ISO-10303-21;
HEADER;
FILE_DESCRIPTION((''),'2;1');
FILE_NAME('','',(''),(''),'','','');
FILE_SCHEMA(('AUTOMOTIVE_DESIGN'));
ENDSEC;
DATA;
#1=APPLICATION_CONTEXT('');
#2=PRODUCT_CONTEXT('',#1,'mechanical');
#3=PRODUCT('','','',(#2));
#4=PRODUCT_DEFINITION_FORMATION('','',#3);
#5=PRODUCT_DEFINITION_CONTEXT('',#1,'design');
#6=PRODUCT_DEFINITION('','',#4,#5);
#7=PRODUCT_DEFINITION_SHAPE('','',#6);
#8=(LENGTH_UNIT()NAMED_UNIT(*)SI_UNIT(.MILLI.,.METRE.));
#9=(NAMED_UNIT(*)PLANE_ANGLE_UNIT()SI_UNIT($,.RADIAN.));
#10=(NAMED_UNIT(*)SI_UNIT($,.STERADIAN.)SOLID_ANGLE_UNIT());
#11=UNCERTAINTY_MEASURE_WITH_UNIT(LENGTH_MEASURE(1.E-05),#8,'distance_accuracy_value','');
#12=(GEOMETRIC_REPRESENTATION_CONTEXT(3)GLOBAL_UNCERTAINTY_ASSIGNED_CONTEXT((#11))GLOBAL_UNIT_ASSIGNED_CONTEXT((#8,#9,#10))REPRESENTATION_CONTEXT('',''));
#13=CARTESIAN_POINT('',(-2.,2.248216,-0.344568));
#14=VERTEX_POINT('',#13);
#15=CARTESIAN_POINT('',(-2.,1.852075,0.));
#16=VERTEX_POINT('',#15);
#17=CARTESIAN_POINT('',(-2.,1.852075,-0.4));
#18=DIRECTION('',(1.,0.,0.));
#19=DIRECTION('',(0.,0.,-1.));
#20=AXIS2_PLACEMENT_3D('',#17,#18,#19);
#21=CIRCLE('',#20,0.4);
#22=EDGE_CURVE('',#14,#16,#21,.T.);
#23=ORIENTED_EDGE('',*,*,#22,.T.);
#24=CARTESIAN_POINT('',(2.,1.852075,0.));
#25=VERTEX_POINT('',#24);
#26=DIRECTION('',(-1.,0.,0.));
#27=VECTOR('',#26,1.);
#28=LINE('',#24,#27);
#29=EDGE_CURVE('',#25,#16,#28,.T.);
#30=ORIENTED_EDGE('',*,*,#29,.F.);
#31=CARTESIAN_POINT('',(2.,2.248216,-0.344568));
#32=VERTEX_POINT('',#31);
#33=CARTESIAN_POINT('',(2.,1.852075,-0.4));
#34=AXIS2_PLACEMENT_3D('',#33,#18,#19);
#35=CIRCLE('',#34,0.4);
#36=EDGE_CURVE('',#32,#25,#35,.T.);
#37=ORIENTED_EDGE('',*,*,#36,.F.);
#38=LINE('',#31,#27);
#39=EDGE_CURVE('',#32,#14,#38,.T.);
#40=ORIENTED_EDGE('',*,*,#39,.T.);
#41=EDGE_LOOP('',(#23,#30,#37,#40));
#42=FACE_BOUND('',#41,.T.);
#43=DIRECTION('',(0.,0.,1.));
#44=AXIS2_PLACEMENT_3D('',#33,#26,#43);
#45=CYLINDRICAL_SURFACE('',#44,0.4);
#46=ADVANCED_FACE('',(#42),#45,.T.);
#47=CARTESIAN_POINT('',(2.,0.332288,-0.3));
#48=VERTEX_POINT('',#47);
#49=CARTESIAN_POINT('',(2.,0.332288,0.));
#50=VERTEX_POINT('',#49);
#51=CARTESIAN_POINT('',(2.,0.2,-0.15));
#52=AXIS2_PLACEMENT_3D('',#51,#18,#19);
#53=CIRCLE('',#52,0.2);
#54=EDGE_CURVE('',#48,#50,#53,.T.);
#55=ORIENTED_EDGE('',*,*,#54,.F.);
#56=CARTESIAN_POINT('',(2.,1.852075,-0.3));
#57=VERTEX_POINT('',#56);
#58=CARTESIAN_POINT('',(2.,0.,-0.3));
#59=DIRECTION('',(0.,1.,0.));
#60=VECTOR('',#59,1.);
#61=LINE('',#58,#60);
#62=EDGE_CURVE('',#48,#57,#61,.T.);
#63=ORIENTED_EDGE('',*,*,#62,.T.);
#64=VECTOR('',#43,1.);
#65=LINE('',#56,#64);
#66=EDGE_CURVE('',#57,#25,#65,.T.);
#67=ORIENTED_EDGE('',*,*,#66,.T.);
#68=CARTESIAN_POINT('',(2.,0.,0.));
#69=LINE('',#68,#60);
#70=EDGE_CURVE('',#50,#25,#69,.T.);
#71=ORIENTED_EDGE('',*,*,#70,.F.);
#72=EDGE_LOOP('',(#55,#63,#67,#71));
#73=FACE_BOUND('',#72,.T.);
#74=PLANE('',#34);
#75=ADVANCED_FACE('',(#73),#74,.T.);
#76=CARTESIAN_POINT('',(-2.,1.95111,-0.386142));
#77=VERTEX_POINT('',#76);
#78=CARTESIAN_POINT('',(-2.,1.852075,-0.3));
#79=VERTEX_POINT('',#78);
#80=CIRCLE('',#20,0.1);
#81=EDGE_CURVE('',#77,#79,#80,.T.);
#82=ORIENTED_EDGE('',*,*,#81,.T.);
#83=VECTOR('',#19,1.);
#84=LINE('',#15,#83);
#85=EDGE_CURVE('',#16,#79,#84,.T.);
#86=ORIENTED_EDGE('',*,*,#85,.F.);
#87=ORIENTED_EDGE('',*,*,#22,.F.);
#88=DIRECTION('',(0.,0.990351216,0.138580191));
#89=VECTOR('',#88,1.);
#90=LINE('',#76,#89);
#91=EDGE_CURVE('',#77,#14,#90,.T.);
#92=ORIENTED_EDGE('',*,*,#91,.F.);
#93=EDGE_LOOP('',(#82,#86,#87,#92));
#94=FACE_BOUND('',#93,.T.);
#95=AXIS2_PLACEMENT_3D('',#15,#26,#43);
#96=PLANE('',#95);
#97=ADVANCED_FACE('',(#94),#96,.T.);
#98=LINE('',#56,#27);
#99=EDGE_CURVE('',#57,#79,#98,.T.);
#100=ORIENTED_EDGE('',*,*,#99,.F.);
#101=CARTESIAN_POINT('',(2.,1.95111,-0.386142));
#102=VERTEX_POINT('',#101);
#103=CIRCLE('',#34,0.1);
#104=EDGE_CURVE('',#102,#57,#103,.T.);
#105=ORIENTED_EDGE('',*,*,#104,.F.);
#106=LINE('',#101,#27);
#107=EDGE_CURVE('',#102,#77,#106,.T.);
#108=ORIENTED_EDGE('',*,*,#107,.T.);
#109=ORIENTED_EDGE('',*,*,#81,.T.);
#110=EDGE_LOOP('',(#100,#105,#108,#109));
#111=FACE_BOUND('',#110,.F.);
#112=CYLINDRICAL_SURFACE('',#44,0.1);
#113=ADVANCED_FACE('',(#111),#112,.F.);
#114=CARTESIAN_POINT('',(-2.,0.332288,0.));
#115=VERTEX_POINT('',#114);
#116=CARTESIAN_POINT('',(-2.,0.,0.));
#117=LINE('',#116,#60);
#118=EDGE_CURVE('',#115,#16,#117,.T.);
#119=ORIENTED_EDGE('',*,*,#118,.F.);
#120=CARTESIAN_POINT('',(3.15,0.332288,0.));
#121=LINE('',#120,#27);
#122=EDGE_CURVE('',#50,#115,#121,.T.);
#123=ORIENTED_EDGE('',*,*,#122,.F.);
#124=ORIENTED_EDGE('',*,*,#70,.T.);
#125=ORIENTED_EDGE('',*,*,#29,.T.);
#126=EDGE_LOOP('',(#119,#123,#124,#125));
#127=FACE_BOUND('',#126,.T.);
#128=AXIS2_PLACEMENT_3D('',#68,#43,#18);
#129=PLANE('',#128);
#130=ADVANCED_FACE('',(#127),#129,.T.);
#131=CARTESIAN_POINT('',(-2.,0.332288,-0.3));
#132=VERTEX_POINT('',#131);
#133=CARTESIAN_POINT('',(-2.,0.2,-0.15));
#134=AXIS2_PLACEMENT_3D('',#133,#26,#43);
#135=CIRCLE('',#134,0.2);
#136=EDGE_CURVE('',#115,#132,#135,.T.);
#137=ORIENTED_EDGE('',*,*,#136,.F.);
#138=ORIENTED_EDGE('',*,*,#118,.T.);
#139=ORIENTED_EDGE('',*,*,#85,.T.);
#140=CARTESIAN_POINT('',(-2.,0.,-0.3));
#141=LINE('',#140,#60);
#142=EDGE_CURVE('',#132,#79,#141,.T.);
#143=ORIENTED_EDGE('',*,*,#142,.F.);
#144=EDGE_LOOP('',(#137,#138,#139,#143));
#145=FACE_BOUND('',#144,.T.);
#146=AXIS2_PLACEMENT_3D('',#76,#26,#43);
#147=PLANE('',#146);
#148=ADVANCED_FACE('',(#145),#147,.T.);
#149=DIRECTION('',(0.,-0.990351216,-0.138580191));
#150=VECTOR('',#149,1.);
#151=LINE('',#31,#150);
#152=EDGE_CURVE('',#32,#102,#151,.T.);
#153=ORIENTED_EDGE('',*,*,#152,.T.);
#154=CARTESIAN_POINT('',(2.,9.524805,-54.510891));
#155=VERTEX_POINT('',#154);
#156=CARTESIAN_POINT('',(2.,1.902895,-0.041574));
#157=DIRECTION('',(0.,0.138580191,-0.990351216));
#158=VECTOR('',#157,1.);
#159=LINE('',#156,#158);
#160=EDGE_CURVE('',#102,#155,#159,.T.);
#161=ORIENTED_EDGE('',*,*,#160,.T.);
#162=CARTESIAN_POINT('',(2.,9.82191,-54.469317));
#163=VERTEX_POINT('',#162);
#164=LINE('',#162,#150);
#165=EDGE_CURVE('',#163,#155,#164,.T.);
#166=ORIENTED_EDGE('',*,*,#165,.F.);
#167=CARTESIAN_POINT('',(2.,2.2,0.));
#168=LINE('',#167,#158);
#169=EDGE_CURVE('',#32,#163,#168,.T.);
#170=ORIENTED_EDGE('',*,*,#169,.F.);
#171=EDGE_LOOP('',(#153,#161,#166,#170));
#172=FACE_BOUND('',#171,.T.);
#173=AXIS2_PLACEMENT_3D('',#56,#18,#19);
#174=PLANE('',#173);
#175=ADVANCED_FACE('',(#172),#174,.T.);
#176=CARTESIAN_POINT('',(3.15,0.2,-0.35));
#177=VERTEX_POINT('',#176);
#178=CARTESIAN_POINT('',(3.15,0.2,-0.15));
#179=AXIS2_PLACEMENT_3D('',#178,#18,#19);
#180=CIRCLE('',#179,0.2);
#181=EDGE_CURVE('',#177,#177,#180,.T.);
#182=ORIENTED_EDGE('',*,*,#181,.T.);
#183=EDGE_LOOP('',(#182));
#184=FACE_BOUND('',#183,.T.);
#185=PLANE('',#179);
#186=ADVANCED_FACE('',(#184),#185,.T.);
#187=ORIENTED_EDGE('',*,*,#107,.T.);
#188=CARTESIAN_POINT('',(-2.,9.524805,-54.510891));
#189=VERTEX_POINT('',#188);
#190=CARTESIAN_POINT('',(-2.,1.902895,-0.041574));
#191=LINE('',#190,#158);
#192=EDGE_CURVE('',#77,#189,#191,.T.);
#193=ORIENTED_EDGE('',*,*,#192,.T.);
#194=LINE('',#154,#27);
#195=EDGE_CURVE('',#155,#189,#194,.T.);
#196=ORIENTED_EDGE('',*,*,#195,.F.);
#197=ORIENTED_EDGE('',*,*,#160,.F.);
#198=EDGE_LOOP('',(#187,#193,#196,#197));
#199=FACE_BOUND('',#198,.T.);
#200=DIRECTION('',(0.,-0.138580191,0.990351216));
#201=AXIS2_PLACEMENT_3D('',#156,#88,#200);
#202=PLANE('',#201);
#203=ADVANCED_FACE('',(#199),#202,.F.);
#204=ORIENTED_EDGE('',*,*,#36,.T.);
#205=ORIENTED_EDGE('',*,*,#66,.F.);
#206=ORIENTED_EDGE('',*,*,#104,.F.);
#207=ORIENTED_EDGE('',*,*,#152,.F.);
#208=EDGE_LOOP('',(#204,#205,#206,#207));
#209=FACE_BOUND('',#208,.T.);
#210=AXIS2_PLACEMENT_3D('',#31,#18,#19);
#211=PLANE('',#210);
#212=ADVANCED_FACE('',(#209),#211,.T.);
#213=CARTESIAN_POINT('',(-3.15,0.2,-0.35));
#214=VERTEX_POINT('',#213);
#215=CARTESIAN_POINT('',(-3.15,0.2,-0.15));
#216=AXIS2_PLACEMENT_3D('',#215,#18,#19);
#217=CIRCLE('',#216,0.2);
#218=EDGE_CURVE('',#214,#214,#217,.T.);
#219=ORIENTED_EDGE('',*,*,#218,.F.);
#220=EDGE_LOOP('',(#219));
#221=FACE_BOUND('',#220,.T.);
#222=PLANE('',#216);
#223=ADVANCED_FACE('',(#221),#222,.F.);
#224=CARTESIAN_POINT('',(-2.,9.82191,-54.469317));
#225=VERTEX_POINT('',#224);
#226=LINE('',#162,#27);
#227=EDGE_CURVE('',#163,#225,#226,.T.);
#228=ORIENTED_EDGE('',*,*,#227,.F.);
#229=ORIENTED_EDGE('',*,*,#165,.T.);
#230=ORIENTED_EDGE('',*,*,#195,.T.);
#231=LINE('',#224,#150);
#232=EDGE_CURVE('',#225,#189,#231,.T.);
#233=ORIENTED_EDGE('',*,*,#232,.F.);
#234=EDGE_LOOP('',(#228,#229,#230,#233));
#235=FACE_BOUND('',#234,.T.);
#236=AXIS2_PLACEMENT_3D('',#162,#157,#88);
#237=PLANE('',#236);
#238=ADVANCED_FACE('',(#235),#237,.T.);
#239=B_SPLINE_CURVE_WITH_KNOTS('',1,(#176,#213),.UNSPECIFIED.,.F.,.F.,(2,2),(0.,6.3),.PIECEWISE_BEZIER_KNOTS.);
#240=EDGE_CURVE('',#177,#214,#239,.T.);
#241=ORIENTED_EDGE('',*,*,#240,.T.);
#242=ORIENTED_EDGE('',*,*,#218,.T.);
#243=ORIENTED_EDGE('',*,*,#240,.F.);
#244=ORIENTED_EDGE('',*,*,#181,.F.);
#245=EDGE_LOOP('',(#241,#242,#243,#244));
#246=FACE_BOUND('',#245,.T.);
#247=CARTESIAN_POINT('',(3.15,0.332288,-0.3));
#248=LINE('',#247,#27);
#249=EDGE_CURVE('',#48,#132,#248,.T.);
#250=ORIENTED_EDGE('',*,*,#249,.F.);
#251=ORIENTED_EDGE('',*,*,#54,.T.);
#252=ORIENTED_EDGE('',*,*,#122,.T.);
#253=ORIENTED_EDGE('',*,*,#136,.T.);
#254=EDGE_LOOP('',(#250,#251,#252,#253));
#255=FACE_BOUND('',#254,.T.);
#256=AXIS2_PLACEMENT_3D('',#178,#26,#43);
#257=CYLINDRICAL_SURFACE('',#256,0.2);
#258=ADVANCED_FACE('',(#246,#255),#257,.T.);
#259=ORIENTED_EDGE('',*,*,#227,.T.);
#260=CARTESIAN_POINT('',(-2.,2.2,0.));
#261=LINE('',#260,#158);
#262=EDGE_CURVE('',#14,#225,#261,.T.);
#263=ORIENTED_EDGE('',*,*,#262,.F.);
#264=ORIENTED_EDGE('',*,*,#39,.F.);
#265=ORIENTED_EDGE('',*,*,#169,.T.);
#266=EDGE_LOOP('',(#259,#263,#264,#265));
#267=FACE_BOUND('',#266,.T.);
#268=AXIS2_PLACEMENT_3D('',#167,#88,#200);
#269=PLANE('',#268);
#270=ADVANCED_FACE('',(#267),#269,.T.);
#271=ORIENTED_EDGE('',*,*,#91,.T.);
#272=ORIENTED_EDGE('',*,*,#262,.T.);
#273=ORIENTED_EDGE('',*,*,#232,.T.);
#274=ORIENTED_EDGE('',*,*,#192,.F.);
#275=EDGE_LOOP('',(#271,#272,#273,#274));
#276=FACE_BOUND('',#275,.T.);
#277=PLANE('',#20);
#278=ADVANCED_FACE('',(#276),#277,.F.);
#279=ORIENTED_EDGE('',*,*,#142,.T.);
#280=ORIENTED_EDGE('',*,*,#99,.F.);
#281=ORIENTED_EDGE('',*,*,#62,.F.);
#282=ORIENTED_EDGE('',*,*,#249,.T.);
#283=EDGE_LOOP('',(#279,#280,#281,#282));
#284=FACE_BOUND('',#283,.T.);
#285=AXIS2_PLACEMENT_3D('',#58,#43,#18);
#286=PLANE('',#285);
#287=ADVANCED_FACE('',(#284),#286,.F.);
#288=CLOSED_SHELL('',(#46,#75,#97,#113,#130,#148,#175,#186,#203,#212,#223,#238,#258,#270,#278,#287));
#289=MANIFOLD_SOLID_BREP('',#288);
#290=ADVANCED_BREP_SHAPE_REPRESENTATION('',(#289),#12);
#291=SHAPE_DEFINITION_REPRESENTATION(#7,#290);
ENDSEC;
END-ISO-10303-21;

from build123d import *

# Parameters (mm, degrees)
BASE_FLANGE1_DEPTH     = 2
CUT_EXTRUDE1_START     = -2
CUT_EXTRUDE1_OUTLINE_W = 0.3
CUT_EXTRUDE1_OUTLINE_H = 0.067712434
CUT_EXTRUDE1_DEPTH     = 4
SKETCH8_R              = 0.2
BOSS_EXTRUDE1_DEPTH    = 3.15


# Read off the part's stored shape, not the designer's step: Cut-Extrude1
# Sheet-metal steps are written as plain solids
with BuildPart() as part:
    # Sketch1 → Base-Flange1 (new, symmetric)
    with BuildSketch(Plane(origin=(0, 0, 0), x_dir=(0, 0, -1), z_dir=(1, 0, 0))):
        with BuildLine():
            Line((0, 0), (0, 1.852075023))
            ThreePointArc((0, 1.852075023), (0.09819474, 2.114588994), (0.344567924, 2.24821551))
            Line((0.344567924, 2.24821551), (54.469316873, 9.82191048))
            Line((54.469316873, 9.82191048), (54.51089093, 9.524805115))
            Line((54.51089093, 9.524805115), (0.386141981, 1.951110145))
            ThreePointArc((0.386141981, 1.951110145), (0.324548685, 1.917703516), (0.3, 1.852075023))
            Line((0.3, 1.852075023), (0.3, 0))
            Line((0.3, 0), (0, 0))
        make_face()
    extrude(amount=BASE_FLANGE1_DEPTH, both=True)

    # Cut-Extrude1 outline → Cut-Extrude1 (cut)
    with BuildSketch(Plane(origin=(0, 0, 0), x_dir=(0, 0, -1), z_dir=(1, 0, 0)).offset(CUT_EXTRUDE1_START)):
        with Locations((0.15, 0.033856217)):
            Rectangle(CUT_EXTRUDE1_OUTLINE_W, CUT_EXTRUDE1_OUTLINE_H)
    extrude(amount=CUT_EXTRUDE1_DEPTH, mode=Mode.SUBTRACT)

    # Sketch8 → Boss-Extrude1 (add, symmetric)
    with BuildSketch(Plane(origin=(0, 0, 0), x_dir=(0, 0, -1), z_dir=(1, 0, 0))):
        with Locations((0.15, 0.2)):
            Circle(SKETCH8_R)
    extrude(amount=BOSS_EXTRUDE1_DEPTH, both=True)


solid = part.part
